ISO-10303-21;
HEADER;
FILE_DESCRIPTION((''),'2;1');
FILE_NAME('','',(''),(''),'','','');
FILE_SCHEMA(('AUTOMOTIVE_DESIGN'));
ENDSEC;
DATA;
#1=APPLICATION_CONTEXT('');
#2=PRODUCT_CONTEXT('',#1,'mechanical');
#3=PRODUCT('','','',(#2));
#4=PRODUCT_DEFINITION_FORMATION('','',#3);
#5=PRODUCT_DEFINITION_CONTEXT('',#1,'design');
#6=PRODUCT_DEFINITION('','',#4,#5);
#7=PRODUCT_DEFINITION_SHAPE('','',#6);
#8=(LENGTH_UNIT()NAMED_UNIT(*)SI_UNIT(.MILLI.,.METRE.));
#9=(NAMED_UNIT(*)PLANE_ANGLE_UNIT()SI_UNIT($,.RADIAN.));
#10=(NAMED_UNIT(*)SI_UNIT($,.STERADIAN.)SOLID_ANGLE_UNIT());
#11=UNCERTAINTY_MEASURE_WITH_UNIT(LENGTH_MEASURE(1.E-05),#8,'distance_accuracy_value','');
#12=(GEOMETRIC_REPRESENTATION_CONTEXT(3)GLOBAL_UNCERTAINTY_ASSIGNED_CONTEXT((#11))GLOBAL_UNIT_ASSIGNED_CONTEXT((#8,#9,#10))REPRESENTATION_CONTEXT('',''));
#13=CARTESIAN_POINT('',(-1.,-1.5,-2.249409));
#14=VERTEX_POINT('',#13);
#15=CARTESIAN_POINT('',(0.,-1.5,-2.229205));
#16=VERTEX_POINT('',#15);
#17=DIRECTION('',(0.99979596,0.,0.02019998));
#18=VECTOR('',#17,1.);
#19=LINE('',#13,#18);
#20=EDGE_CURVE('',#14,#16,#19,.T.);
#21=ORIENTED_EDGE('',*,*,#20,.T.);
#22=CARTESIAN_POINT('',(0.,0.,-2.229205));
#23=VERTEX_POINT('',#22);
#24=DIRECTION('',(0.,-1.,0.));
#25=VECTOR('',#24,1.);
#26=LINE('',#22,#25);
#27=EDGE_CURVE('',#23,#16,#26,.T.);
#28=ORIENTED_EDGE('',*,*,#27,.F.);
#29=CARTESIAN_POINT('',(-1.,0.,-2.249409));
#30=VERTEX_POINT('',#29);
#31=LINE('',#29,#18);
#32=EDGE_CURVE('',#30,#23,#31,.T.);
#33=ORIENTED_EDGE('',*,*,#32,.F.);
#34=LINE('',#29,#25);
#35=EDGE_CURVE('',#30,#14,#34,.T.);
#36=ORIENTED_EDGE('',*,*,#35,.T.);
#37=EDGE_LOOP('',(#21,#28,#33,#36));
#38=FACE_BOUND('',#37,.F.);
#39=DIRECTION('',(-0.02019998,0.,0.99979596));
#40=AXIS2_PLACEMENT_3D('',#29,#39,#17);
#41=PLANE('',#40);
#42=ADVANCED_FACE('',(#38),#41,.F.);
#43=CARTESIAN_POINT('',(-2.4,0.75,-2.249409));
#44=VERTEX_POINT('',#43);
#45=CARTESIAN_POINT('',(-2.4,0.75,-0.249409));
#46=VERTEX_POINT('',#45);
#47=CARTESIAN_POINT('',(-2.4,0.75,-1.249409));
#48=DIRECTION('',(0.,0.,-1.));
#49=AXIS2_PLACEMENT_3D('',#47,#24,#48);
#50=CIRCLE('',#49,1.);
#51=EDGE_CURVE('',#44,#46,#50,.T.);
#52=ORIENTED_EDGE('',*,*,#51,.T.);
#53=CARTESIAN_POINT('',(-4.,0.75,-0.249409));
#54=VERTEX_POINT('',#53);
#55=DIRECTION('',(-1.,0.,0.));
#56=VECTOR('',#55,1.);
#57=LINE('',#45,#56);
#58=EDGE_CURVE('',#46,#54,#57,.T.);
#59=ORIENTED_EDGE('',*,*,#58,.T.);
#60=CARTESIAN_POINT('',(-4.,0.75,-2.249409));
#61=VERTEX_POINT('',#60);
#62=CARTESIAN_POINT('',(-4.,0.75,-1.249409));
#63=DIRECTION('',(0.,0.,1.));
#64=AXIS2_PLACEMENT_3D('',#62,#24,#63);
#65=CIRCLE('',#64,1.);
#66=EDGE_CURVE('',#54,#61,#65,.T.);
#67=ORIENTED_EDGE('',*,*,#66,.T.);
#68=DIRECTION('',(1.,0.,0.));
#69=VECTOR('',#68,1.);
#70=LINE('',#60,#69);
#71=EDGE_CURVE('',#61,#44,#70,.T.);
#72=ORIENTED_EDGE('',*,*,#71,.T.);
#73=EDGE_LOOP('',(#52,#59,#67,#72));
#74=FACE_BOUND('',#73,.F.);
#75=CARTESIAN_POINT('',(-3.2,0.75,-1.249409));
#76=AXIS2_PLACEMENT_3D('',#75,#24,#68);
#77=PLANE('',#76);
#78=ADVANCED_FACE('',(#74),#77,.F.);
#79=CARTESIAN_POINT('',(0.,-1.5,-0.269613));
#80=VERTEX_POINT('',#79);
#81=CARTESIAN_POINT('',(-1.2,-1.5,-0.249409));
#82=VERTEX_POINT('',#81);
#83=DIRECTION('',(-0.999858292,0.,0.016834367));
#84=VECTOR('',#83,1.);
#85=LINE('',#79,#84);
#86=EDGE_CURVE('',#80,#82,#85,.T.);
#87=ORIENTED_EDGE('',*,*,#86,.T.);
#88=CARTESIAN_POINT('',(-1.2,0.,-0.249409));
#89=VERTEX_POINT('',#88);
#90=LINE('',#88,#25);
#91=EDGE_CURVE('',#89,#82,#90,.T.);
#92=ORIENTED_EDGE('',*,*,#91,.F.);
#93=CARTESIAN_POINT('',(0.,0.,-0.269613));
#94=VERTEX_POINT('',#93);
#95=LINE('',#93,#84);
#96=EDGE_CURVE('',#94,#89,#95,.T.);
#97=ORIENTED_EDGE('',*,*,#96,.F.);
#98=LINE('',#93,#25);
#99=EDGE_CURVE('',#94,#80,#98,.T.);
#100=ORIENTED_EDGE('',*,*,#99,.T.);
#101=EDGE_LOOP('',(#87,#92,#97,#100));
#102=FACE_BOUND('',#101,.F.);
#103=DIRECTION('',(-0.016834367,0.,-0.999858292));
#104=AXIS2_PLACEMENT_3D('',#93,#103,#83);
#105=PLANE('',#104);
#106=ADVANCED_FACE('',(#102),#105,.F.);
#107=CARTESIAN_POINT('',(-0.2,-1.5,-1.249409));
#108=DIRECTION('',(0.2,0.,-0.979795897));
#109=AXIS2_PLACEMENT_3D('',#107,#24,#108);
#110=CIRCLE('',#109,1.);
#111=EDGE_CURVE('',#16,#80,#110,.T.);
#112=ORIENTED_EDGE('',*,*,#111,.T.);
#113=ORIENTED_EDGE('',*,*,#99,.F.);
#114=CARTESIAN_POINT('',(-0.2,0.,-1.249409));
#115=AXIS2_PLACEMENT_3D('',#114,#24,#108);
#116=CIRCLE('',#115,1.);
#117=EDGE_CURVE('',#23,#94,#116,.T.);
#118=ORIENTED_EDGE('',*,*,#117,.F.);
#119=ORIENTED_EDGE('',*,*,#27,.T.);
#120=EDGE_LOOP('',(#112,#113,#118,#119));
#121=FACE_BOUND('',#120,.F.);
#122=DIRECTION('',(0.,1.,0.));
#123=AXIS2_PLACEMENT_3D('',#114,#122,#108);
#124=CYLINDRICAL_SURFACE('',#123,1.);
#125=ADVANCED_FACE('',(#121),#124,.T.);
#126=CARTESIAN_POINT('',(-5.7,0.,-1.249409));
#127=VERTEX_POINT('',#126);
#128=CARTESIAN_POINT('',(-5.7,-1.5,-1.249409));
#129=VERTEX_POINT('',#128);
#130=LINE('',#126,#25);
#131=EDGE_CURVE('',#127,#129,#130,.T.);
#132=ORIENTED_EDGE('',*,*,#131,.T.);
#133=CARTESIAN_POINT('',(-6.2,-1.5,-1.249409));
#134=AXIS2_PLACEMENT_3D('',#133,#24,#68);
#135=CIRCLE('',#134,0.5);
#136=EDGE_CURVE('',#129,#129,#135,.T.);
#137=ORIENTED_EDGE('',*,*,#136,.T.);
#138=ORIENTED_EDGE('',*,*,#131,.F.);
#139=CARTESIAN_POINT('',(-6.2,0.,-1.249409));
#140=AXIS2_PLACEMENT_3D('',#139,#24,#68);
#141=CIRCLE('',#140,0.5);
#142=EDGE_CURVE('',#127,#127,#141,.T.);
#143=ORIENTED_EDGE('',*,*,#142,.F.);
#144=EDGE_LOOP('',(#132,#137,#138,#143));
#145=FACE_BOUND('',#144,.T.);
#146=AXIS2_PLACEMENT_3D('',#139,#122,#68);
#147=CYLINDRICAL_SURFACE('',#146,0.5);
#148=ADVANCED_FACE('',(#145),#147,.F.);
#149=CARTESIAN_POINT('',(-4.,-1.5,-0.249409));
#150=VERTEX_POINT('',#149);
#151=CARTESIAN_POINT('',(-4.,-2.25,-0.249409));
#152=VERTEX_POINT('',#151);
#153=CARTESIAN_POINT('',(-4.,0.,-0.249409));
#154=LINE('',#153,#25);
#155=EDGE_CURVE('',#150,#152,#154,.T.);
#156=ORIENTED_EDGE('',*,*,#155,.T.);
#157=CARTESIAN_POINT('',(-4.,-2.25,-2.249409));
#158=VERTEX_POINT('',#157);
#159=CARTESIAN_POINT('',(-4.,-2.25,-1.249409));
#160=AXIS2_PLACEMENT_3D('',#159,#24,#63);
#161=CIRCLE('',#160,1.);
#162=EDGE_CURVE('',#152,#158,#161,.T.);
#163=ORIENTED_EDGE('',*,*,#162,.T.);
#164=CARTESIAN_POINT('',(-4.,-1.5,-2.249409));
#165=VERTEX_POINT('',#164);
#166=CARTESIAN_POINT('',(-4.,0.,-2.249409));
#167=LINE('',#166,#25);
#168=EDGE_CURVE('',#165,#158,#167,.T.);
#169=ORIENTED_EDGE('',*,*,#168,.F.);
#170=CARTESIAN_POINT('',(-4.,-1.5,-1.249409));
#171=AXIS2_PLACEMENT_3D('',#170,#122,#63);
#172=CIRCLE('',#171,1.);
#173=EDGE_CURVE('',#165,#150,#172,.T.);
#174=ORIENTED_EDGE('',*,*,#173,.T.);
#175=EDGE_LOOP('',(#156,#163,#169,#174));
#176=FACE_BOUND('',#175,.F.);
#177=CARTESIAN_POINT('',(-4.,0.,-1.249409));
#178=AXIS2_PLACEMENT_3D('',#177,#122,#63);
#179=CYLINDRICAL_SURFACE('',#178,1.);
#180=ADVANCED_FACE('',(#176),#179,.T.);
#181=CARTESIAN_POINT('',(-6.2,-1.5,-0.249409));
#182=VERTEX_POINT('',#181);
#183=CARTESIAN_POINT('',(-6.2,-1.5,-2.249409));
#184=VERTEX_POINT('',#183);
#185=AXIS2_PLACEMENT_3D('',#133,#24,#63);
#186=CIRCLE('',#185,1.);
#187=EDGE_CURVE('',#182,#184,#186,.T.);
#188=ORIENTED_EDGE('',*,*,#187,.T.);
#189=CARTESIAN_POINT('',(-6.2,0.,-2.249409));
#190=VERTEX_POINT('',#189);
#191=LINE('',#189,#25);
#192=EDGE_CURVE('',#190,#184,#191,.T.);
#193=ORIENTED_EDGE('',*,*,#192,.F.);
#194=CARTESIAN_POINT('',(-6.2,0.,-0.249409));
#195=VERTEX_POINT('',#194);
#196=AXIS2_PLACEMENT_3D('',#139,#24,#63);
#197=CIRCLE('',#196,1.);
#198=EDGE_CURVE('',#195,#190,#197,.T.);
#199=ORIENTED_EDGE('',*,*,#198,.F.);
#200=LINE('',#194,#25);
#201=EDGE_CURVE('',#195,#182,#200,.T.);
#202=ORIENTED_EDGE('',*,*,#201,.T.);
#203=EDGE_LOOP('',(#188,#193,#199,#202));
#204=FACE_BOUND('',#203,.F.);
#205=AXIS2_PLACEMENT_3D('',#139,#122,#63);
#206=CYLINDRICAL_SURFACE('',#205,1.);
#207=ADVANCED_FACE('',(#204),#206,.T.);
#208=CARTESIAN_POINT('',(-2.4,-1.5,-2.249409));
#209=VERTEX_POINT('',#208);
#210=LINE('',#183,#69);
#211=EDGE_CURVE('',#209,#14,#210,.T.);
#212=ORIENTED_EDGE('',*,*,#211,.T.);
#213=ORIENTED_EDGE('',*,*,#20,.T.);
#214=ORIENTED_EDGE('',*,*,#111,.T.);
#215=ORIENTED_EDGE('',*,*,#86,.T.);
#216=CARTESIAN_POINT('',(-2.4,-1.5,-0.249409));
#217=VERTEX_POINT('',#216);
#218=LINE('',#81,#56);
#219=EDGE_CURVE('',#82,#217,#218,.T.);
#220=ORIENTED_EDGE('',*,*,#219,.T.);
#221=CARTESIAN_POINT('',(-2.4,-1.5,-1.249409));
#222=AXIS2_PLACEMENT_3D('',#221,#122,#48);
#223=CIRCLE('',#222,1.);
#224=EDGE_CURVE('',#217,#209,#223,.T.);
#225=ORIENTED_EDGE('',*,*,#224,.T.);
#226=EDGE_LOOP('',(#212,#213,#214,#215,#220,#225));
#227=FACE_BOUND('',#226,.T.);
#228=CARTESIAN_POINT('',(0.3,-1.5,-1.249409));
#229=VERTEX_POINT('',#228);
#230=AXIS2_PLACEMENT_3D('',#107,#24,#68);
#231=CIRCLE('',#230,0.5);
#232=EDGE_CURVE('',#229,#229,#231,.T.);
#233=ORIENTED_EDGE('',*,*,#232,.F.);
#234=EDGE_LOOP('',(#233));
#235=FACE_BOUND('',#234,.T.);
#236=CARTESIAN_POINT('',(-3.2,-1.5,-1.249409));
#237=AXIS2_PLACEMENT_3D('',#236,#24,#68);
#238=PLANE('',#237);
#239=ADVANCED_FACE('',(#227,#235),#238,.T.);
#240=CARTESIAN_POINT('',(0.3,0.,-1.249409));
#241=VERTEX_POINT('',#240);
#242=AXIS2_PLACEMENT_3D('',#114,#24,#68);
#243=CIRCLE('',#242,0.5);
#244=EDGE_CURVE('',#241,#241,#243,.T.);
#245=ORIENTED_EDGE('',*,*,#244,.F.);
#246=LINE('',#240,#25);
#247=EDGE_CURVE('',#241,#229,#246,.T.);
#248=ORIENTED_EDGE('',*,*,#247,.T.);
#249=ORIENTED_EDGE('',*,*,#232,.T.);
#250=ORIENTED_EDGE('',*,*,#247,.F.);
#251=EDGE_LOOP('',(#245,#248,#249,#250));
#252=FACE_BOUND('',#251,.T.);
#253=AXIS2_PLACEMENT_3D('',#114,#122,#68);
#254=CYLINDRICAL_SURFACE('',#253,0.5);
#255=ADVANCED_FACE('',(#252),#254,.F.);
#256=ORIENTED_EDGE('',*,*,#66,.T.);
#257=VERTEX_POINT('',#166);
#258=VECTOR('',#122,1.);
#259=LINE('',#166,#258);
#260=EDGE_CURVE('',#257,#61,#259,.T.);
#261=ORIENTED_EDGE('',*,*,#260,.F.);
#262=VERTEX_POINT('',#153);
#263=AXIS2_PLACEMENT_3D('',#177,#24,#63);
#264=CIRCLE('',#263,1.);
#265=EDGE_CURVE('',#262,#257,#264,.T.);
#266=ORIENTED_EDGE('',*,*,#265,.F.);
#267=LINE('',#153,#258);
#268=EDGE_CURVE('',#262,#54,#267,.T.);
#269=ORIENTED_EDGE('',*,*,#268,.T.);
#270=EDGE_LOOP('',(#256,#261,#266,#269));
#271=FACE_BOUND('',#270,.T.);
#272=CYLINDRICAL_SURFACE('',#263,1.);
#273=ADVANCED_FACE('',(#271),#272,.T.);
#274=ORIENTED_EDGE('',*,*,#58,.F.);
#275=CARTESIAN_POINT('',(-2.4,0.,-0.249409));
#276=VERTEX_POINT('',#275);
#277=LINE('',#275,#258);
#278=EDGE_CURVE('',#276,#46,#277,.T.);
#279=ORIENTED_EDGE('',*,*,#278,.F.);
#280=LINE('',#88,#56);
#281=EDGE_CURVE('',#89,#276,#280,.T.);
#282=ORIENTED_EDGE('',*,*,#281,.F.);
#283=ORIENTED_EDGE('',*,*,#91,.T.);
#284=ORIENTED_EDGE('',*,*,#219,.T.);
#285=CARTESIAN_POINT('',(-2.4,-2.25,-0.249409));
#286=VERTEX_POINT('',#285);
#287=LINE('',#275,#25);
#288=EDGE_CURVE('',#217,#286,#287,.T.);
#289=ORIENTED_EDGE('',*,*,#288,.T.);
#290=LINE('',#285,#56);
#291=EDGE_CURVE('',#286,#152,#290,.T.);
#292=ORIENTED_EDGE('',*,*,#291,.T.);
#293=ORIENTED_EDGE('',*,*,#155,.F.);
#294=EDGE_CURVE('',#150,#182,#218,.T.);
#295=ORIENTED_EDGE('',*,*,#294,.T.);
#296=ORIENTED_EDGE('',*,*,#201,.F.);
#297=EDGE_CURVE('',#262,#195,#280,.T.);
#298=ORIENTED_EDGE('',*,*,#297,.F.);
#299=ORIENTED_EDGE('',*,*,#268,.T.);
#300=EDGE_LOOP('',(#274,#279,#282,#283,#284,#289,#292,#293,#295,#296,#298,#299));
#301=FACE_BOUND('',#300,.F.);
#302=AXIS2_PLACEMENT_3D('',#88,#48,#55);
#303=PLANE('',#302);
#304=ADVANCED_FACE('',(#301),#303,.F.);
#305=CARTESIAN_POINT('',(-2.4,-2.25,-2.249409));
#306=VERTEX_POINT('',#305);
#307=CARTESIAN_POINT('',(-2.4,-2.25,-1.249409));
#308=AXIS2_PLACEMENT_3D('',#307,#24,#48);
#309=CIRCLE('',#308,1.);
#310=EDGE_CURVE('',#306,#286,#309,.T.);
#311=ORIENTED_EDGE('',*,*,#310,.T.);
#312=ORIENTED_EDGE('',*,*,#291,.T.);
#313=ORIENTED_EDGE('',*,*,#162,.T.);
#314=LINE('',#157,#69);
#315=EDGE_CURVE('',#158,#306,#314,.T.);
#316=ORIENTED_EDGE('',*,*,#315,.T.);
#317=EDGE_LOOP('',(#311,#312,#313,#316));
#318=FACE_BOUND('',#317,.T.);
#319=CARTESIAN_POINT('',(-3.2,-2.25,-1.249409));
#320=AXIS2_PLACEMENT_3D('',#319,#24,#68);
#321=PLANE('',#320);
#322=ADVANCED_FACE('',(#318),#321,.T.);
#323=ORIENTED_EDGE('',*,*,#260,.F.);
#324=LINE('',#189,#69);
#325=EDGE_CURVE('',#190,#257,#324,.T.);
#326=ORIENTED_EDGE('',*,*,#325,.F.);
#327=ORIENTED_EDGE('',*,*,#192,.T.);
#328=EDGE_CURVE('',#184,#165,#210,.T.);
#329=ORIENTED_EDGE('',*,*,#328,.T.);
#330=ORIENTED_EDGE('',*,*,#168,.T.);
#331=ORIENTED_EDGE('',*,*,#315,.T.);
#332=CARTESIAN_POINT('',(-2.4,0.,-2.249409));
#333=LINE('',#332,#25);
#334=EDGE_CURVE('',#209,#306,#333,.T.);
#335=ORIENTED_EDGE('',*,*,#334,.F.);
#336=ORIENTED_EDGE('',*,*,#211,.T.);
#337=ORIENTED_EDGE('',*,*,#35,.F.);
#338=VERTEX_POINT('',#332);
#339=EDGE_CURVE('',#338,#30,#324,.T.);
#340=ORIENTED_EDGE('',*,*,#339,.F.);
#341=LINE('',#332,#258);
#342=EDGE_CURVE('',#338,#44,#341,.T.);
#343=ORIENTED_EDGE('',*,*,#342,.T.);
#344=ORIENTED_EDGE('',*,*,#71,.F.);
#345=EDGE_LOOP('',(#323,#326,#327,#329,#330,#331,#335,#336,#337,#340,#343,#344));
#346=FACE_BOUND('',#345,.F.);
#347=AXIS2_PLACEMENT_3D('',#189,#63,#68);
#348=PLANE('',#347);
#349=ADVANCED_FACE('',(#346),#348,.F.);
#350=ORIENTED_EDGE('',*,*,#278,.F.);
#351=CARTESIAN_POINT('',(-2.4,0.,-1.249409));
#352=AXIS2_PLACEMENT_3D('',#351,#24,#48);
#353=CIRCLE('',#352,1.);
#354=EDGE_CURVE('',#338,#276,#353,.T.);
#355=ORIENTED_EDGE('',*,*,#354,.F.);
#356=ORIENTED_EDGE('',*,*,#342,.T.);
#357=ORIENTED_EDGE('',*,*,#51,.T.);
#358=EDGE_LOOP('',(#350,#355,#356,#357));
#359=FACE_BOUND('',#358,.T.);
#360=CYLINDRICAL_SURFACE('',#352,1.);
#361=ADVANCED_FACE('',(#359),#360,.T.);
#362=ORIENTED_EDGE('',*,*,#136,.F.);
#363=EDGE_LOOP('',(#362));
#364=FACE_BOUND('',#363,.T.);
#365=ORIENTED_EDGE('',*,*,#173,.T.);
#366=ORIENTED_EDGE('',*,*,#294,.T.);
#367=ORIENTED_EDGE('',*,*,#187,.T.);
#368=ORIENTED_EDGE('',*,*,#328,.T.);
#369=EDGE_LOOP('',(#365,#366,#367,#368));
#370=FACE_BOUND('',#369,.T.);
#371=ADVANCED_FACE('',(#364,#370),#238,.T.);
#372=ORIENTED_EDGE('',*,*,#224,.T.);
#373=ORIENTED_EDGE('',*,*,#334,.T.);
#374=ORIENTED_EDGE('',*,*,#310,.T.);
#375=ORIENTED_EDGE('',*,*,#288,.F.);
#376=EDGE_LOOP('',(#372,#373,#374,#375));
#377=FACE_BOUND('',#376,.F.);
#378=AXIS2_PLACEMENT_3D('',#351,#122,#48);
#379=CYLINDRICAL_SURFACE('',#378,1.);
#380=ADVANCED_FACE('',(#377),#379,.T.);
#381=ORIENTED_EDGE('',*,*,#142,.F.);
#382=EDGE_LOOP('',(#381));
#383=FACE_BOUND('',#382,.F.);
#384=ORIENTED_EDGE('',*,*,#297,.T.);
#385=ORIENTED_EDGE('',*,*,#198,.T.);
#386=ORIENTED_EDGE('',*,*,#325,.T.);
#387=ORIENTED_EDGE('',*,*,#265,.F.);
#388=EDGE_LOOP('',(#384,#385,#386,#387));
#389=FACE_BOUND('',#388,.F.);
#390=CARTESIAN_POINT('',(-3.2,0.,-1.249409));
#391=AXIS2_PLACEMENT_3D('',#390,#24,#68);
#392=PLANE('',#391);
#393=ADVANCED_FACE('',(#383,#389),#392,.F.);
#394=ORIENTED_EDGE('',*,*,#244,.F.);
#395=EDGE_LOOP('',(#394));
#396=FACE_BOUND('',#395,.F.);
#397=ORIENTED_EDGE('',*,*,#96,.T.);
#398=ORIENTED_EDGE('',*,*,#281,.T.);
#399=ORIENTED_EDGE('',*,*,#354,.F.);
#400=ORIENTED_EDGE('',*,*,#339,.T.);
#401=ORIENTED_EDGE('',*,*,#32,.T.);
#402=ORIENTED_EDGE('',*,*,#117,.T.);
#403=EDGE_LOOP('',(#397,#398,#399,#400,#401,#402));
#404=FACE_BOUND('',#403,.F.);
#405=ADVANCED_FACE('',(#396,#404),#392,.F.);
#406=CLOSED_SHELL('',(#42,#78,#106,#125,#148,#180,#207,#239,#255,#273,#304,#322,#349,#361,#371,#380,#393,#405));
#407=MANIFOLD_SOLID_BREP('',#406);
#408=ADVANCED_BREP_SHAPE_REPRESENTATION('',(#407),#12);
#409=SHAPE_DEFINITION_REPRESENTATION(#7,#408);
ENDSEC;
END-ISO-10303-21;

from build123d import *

# Parameters (mm, degrees)
F0_R          = 0.5
F1_DEPTH      = 1.5
F2_DEPTH      = 0.75
F2_DEPTH_BACK = 2.25


# Not quite as in the source:
# - a feature names something its author has since deleted; it is built from what else it names


with BuildPart() as f1:
    # F0 (on Front) → F1 (new body)
    with BuildSketch(Plane.XZ):
        with BuildLine():
            ThreePointArc((-2.4, -2.24940907), (-1.4, -1.24940907), (-2.4, -0.24940907))
            Line((-2.4, -0.24940907), (-4, -0.24940907))
            ThreePointArc((-4, -0.24940907), (-5, -1.24940907), (-4, -2.24940907))
            Line((-4, -2.24940907), (-2.4, -2.24940907))
        make_face()
        with BuildLine():
            Line((0, -0.2696131729), (-1.2, -0.24940907))
            Line((-1.2, -0.24940907), (-2.4, -0.24940907))
            ThreePointArc((-2.4, -0.24940907), (-1.4, -1.24940907), (-2.4, -2.24940907))
            Line((-2.4, -2.24940907), (-1, -2.24940907))
            Line((-1, -2.24940907), (0, -2.2292049671))
            ThreePointArc((0, -2.2292049671), (0.8, -1.24940907), (0, -0.2696131729))
        make_face()
        with Locations((-0.2, -1.24940907)):
            Circle(F0_R, mode=Mode.SUBTRACT)
        with BuildLine():
            ThreePointArc((-4, -2.24940907), (-5, -1.24940907), (-4, -0.24940907))
            Line((-4, -0.24940907), (-6.2, -0.24940907))
            ThreePointArc((-6.2, -0.24940907), (-7.2, -1.24940907), (-6.2, -2.24940907))
            Line((-6.2, -2.24940907), (-4, -2.24940907))
        make_face()
        with Locations((-6.2, -1.24940907)):
            Circle(F0_R, mode=Mode.SUBTRACT)
    extrude(amount=F1_DEPTH)

    # F0 (on Front) → F2 (join, two sides)
    with BuildSketch(Plane.XZ) as f2_sk:
        with BuildLine():
            ThreePointArc((-2.4, -2.24940907), (-1.4, -1.24940907), (-2.4, -0.24940907))
            Line((-2.4, -0.24940907), (-4, -0.24940907))
            ThreePointArc((-4, -0.24940907), (-5, -1.24940907), (-4, -2.24940907))
            Line((-4, -2.24940907), (-2.4, -2.24940907))
        make_face()
    extrude(amount=-F2_DEPTH)
    extrude(f2_sk.sketch, amount=F2_DEPTH_BACK)


solid = f1.part
